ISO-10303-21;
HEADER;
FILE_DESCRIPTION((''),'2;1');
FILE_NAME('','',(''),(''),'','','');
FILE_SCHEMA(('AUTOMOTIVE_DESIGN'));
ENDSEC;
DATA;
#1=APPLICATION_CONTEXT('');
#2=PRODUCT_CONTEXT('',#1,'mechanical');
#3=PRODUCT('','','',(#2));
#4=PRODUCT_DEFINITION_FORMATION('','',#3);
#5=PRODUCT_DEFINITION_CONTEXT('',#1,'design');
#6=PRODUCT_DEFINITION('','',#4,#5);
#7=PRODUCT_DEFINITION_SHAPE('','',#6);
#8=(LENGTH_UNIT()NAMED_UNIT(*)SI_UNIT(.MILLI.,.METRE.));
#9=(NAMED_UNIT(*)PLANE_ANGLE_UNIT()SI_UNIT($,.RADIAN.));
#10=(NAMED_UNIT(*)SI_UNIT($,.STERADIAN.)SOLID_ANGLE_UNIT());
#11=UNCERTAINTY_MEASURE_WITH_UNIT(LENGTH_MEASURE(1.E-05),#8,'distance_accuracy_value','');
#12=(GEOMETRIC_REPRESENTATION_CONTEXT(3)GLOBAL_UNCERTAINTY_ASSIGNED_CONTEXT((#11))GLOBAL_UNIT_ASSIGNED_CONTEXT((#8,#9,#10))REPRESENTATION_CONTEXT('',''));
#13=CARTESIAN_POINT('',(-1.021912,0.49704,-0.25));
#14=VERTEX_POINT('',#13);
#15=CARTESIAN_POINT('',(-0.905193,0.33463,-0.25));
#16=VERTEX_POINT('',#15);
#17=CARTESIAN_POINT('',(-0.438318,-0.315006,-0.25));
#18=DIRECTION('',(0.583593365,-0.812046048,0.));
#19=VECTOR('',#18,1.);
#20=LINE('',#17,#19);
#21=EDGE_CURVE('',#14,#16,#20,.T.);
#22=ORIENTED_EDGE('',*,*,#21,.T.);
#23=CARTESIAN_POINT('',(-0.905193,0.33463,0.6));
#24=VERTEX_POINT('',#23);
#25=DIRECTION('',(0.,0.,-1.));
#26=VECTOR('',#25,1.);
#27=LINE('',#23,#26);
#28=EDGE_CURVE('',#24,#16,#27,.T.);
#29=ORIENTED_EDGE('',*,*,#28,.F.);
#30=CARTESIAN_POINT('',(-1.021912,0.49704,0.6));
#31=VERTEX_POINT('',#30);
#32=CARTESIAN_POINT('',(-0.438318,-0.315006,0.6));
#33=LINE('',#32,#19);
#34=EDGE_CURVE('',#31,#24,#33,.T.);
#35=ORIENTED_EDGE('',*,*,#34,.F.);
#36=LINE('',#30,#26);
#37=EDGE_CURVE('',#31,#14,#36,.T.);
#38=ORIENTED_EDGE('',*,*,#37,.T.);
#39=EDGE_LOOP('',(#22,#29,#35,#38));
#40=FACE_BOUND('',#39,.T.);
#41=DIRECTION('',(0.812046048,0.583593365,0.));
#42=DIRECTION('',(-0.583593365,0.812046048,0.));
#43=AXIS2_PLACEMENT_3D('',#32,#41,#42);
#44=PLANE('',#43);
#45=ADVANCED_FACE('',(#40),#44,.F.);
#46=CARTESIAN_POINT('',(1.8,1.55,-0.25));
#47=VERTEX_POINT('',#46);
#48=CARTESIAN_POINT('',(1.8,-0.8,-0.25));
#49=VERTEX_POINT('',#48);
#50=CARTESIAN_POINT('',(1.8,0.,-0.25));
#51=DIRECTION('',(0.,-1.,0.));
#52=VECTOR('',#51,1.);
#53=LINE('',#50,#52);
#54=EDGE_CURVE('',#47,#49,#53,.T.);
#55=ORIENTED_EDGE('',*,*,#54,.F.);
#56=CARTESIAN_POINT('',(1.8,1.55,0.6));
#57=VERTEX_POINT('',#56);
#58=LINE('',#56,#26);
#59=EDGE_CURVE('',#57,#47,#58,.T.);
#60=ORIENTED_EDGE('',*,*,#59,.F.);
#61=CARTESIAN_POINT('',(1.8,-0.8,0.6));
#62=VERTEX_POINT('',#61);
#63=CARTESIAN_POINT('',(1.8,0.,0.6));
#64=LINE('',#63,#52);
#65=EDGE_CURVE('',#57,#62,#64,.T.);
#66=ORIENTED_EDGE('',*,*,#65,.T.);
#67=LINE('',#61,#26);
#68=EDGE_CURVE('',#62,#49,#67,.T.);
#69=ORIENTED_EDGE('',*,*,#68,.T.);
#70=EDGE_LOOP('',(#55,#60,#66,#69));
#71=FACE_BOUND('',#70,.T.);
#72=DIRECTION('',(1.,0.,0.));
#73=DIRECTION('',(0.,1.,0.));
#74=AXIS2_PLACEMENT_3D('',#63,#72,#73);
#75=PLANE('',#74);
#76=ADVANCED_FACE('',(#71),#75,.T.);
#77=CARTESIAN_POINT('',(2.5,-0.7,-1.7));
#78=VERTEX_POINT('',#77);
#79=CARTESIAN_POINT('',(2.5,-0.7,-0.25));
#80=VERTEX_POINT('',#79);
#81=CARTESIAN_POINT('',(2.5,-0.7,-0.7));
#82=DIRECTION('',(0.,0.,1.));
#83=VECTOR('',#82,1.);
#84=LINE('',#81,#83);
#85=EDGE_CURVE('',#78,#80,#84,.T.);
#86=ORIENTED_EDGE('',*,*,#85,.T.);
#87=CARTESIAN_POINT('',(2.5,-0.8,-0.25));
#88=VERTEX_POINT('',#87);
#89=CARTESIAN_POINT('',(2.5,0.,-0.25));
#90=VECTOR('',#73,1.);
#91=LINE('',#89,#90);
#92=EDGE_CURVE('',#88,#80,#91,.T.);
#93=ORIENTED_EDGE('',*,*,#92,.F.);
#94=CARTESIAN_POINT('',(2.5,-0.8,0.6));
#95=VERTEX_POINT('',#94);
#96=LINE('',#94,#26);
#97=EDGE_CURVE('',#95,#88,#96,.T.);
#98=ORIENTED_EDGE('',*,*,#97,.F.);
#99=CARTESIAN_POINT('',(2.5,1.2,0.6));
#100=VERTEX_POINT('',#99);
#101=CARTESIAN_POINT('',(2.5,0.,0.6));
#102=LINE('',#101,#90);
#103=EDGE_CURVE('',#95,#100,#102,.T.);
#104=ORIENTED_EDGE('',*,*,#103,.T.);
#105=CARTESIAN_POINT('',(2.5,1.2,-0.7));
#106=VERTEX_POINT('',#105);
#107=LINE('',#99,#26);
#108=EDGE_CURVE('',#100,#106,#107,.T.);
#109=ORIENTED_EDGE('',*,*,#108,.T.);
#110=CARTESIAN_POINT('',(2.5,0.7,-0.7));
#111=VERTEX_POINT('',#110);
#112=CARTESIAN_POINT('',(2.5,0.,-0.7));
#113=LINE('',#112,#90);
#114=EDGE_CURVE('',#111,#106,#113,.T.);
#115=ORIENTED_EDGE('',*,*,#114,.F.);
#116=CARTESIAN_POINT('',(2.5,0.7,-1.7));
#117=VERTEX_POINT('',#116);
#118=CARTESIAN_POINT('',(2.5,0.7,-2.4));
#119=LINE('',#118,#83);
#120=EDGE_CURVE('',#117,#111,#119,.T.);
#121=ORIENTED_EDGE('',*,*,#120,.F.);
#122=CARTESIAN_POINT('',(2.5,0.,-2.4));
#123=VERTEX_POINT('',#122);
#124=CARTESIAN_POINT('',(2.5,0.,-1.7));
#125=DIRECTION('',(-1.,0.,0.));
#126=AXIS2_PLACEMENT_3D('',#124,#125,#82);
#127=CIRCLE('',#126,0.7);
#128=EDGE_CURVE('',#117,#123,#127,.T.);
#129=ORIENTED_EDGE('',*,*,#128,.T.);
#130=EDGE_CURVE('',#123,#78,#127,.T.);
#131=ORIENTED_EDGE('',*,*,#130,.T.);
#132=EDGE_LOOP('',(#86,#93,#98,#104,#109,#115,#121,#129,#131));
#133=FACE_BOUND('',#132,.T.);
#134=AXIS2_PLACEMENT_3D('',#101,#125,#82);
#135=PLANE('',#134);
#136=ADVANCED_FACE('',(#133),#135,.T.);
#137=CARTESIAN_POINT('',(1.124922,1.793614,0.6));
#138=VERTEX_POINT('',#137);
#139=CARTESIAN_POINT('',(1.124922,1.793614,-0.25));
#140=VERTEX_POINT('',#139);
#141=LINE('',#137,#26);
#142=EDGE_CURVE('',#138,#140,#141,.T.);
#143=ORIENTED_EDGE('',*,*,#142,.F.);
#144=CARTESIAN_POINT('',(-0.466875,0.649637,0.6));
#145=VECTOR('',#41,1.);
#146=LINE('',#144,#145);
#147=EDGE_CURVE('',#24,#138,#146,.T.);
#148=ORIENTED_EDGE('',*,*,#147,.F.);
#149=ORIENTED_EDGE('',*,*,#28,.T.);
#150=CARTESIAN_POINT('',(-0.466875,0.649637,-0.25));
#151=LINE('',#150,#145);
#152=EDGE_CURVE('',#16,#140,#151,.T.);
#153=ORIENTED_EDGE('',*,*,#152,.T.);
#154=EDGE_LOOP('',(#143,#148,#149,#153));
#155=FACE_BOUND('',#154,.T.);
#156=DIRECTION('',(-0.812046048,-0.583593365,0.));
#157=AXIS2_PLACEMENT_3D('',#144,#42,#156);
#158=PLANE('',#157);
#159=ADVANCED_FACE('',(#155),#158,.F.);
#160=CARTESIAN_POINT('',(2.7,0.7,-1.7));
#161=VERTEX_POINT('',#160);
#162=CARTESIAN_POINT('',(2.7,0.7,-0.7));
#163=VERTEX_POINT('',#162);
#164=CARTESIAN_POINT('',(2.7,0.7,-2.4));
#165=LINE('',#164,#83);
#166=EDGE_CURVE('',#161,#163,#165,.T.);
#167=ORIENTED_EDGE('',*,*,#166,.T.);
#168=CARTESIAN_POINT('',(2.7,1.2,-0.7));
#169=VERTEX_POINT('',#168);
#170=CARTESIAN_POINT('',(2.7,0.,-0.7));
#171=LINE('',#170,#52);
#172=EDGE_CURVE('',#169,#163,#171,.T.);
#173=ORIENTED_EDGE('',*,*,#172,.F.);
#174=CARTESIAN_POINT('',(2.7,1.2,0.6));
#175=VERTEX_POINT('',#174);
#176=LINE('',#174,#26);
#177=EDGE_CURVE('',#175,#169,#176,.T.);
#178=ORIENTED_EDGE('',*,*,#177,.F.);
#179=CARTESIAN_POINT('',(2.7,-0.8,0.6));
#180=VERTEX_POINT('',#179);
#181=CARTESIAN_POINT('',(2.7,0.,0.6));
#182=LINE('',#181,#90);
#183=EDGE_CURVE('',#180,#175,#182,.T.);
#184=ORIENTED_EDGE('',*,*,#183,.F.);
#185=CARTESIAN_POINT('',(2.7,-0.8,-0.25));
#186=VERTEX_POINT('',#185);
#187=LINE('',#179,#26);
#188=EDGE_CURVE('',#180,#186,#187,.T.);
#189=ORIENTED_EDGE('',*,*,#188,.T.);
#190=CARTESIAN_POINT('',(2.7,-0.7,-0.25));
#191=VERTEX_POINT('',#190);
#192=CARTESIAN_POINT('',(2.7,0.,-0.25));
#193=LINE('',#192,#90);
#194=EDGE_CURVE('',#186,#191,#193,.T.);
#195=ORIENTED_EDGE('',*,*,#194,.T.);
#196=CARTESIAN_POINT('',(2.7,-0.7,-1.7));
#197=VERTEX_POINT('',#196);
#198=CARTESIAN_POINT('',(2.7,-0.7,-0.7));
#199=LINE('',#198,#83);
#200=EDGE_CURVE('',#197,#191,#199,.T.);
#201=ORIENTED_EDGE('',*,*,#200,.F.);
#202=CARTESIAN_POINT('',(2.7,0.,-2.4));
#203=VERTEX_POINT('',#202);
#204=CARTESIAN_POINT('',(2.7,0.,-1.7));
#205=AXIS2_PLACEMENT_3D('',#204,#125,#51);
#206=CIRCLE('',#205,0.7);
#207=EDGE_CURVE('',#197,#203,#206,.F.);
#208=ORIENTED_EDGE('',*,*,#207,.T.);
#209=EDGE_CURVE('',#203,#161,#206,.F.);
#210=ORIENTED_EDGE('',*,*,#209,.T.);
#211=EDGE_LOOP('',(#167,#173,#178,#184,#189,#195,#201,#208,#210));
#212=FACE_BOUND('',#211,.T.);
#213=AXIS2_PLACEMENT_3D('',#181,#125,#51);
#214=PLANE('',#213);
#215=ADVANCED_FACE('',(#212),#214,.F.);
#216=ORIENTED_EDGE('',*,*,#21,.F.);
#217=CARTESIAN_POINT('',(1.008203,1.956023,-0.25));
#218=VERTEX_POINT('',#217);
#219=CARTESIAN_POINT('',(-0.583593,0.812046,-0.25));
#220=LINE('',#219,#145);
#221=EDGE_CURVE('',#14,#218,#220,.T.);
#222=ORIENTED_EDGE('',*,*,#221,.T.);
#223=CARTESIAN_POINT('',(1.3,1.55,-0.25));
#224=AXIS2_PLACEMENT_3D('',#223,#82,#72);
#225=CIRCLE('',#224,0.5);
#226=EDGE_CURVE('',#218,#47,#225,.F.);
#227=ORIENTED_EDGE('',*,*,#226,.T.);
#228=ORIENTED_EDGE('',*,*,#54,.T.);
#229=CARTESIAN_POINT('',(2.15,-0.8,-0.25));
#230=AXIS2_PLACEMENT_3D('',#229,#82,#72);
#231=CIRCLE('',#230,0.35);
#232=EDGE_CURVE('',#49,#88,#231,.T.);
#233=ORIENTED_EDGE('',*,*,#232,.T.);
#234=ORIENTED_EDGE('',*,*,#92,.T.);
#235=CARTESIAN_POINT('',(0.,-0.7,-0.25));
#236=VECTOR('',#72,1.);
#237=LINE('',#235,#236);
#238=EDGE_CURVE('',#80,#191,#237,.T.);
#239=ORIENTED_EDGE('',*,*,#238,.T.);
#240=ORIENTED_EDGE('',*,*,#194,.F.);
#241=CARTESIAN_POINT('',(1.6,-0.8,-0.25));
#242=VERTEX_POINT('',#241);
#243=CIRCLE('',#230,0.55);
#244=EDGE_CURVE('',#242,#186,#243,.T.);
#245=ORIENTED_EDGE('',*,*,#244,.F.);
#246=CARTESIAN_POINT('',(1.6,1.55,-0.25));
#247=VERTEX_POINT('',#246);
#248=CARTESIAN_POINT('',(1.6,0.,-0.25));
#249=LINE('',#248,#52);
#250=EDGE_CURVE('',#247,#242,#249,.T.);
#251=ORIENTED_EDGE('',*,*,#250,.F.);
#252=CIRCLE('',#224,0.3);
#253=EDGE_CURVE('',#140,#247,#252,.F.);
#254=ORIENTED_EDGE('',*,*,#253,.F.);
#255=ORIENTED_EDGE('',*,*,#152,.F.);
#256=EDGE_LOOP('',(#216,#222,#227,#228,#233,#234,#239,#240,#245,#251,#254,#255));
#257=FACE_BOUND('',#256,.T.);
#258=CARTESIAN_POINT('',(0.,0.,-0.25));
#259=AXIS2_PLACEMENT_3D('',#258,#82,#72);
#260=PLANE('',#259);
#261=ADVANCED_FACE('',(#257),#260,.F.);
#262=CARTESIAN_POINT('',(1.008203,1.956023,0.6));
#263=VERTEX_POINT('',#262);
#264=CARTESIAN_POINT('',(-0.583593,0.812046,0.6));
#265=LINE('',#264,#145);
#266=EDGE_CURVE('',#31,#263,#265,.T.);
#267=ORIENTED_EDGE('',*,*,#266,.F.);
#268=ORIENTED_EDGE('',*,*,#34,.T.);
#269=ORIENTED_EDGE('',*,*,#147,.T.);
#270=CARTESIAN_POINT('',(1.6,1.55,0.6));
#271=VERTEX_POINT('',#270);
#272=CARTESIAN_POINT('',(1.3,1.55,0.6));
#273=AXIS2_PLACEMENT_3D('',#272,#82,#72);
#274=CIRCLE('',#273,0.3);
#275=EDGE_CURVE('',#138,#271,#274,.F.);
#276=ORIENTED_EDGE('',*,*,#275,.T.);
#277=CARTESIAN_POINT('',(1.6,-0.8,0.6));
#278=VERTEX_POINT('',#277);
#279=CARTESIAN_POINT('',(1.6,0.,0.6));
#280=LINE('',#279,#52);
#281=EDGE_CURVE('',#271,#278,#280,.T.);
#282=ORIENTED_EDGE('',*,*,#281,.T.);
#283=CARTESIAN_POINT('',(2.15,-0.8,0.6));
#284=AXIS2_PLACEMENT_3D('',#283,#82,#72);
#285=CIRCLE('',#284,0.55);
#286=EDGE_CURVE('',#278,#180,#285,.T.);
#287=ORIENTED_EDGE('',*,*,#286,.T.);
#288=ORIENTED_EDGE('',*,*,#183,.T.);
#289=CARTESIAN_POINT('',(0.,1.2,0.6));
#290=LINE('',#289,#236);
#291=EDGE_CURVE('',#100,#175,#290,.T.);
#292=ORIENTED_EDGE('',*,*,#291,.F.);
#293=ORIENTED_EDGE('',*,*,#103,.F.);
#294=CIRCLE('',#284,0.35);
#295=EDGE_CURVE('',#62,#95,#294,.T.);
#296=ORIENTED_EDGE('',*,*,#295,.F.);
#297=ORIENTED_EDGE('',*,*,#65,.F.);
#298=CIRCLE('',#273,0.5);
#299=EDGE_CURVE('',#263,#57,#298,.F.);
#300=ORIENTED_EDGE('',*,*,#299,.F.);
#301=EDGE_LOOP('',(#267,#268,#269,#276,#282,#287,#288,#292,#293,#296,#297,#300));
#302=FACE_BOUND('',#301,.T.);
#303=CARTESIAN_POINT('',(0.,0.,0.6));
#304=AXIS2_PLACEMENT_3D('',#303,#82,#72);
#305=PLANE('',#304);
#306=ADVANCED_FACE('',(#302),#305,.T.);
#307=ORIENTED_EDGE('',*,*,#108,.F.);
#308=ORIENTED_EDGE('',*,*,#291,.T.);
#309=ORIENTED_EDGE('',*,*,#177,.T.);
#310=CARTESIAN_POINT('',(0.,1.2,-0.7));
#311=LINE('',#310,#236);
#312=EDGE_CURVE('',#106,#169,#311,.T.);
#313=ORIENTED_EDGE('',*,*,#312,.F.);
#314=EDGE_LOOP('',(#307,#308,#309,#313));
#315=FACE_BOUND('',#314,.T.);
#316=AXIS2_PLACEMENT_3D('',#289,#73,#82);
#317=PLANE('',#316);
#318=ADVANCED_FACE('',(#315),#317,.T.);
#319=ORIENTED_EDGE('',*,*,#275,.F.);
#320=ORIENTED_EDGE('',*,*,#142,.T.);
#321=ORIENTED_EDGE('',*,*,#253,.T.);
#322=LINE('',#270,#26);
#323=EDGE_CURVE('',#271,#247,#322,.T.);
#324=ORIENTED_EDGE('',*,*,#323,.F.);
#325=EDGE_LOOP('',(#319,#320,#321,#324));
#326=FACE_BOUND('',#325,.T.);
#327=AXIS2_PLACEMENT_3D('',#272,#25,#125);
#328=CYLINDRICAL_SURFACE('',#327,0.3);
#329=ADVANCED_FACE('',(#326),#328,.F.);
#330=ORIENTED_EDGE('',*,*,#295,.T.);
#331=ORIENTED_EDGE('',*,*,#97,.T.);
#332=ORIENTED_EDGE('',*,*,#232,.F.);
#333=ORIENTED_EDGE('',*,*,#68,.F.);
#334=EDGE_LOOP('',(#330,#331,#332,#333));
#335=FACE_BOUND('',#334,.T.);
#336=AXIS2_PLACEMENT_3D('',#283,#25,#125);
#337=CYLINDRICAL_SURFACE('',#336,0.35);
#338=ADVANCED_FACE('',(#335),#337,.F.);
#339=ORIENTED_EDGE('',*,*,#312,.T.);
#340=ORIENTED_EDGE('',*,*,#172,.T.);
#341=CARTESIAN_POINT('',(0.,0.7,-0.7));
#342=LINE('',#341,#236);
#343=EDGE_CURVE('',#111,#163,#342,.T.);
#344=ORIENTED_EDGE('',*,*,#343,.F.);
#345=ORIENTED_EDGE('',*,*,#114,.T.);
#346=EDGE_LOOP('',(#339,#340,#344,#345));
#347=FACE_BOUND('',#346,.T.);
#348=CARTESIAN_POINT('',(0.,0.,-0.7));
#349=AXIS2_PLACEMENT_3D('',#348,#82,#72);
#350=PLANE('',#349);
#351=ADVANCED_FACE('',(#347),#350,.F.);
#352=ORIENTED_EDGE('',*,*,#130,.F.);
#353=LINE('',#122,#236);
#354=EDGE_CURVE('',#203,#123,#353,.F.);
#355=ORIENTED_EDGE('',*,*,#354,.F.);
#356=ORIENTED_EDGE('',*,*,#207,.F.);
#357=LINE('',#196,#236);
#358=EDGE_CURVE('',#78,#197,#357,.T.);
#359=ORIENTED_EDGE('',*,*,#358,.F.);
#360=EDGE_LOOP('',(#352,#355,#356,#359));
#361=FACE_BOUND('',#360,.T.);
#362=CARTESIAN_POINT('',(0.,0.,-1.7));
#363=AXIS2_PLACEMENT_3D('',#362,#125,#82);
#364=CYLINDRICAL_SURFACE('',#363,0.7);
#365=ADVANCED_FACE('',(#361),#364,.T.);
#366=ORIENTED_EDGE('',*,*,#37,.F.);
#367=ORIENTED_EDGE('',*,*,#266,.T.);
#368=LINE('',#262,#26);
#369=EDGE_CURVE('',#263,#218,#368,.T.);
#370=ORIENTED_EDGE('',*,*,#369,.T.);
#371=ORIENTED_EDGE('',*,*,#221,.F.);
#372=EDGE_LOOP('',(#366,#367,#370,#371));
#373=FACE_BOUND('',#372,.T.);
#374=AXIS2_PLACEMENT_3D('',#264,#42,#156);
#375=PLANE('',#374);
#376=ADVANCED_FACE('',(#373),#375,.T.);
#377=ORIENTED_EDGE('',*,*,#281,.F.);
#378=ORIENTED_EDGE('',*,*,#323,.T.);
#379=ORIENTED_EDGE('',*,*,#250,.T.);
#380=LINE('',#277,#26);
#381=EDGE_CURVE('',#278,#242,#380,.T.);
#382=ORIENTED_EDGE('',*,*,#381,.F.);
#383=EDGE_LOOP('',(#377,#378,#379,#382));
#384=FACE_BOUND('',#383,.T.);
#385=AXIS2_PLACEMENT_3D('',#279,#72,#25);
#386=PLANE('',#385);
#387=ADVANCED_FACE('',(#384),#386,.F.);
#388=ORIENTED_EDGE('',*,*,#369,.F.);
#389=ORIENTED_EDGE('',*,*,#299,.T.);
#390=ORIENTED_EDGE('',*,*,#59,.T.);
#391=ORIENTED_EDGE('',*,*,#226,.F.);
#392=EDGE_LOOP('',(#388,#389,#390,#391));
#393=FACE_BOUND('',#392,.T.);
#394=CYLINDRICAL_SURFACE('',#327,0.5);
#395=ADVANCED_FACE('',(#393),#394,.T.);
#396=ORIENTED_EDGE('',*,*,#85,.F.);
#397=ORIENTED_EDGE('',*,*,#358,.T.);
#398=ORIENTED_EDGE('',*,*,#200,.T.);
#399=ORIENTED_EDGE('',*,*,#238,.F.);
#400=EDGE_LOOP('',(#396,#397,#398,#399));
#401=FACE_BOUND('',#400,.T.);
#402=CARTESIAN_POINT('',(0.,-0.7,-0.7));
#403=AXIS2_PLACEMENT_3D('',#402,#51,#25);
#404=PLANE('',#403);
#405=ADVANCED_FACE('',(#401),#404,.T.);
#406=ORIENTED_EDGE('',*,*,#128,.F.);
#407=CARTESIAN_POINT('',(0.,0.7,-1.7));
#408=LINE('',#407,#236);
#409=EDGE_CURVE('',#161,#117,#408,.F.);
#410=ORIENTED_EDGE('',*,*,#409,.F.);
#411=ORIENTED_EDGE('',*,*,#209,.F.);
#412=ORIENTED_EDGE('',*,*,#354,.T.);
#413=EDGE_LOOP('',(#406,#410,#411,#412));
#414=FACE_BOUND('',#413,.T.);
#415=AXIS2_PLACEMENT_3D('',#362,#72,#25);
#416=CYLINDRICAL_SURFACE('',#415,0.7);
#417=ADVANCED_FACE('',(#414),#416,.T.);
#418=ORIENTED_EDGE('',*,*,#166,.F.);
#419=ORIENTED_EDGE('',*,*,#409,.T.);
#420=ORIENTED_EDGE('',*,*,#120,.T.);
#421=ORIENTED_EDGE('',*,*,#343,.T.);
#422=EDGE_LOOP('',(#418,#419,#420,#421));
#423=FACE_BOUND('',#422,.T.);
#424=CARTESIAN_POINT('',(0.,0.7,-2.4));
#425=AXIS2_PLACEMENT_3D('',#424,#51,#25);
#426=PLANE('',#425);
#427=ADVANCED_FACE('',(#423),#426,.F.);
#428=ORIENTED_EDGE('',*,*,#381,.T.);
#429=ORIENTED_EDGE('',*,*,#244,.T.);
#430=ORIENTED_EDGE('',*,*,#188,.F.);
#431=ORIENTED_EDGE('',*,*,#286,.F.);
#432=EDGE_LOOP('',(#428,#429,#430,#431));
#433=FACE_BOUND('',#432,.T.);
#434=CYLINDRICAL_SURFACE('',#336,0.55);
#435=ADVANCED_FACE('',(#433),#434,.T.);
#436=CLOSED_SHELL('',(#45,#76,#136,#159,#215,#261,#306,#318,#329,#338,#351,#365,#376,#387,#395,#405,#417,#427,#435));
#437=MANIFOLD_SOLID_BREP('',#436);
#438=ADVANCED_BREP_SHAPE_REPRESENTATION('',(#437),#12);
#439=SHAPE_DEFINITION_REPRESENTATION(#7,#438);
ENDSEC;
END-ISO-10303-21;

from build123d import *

# Parameters (mm, degrees)
SKETCH1_W           = 0.2
SKETCH1_H           = 1.4
SKETCH1_H_2         = 0.5
BOSS_EXTRUDE1_DEPTH = 0.6
SKETCH1_3_W         = 0.2
SKETCH1_3_H         = 1.4
SKETCH1_3_H_2       = 0.5
BOSS_EXTRUDE2_DEPTH = 0.7
BOSS_EXTRUDE3_START = -0.7
SKETCH1_5_W         = 0.2
SKETCH1_5_H         = 1.4
BOSS_EXTRUDE3_DEPTH = 1.7
FILLET1_R           = 0.7
BOSS_EXTRUDE4_START = -0.25
BOSS_EXTRUDE4_DEPTH = 0.25


with BuildPart() as part:
    # Sketch1 → Boss-Extrude1 (new body)
    with BuildSketch(Plane.XY):
        with BuildLine():
            Line((1.008203317, 1.956023024), (-1.021911803, 0.497039611))
            Line((-1.021911803, 0.497039611), (-0.90519313, 0.334630402))
            Line((-0.90519313, 0.334630402), (1.12492199, 1.793613814))
            ThreePointArc((1.12492199, 1.793613814), (1.436887905, 1.816948874), (1.6, 1.55))
            Line((1.6, 1.55), (1.6, -0.8))
            ThreePointArc((1.6, -0.8), (2.15, -1.35), (2.7, -0.8))
            Line((2.7, -0.8), (2.7, -0.7))
            Line((2.7, -0.7), (2.5, -0.7))
            Line((2.5, -0.7), (2.5, -0.8))
            ThreePointArc((2.5, -0.8), (2.15, -1.15), (1.8, -0.8))
            Line((1.8, -0.8), (1.8, 1.55))
            ThreePointArc((1.8, 1.55), (1.528146509, 1.99491479), (1.008203317, 1.956023024))
        make_face()
        with Locations((2.6, 0)):
            Rectangle(SKETCH1_W, SKETCH1_H)
        with Locations((2.6, 0.95)):
            Rectangle(SKETCH1_W, SKETCH1_H_2)
    extrude(amount=BOSS_EXTRUDE1_DEPTH)

    # Sketch1<3> → Boss-Extrude2 (add)
    with BuildSketch(Plane.XY):
        with Locations((2.6, 0)):
            Rectangle(SKETCH1_3_W, SKETCH1_3_H)
        with Locations((2.6, 0.95)):
            Rectangle(SKETCH1_3_W, SKETCH1_3_H_2)
    extrude(amount=-BOSS_EXTRUDE2_DEPTH)

    # Sketch1<5> → Boss-Extrude3 (add)
    with BuildSketch(Plane.XY.offset(BOSS_EXTRUDE3_START)):
        with Locations((2.6, 0)):
            Rectangle(SKETCH1_5_W, SKETCH1_5_H)
    extrude(amount=-BOSS_EXTRUDE3_DEPTH)

    # Fillet1
    fillet1_edges = [part.edges().sort_by_distance(p)[0] for p in [
        (2.6, 0.7, -2.4),
        (2.6, -0.7, -2.4),
    ]]
    fillet(fillet1_edges, radius=FILLET1_R - 0.0001)  # a hair under: the kernel refuses the full size

    # Sketch1<6> → Boss-Extrude4 (add)
    with BuildSketch(Plane.XY.offset(BOSS_EXTRUDE4_START)):
        with BuildLine():
            Line((1.008203317, 1.956023024), (-1.021911803, 0.497039611))
            Line((-1.021911803, 0.497039611), (-0.90519313, 0.334630402))
            Line((-0.90519313, 0.334630402), (1.12492199, 1.793613814))
            ThreePointArc((1.12492199, 1.793613814), (1.436887905, 1.816948874), (1.6, 1.55))
            Line((1.6, 1.55), (1.6, -0.8))
            ThreePointArc((1.6, -0.8), (2.15, -1.35), (2.7, -0.8))
            Line((2.7, -0.8), (2.7, -0.7))
            Line((2.7, -0.7), (2.5, -0.7))
            Line((2.5, -0.7), (2.5, -0.8))
            ThreePointArc((2.5, -0.8), (2.15, -1.15), (1.8, -0.8))
            Line((1.8, -0.8), (1.8, 1.55))
            ThreePointArc((1.8, 1.55), (1.528146509, 1.99491479), (1.008203317, 1.956023024))
        make_face()
    extrude(amount=BOSS_EXTRUDE4_DEPTH)


solid = part.part
